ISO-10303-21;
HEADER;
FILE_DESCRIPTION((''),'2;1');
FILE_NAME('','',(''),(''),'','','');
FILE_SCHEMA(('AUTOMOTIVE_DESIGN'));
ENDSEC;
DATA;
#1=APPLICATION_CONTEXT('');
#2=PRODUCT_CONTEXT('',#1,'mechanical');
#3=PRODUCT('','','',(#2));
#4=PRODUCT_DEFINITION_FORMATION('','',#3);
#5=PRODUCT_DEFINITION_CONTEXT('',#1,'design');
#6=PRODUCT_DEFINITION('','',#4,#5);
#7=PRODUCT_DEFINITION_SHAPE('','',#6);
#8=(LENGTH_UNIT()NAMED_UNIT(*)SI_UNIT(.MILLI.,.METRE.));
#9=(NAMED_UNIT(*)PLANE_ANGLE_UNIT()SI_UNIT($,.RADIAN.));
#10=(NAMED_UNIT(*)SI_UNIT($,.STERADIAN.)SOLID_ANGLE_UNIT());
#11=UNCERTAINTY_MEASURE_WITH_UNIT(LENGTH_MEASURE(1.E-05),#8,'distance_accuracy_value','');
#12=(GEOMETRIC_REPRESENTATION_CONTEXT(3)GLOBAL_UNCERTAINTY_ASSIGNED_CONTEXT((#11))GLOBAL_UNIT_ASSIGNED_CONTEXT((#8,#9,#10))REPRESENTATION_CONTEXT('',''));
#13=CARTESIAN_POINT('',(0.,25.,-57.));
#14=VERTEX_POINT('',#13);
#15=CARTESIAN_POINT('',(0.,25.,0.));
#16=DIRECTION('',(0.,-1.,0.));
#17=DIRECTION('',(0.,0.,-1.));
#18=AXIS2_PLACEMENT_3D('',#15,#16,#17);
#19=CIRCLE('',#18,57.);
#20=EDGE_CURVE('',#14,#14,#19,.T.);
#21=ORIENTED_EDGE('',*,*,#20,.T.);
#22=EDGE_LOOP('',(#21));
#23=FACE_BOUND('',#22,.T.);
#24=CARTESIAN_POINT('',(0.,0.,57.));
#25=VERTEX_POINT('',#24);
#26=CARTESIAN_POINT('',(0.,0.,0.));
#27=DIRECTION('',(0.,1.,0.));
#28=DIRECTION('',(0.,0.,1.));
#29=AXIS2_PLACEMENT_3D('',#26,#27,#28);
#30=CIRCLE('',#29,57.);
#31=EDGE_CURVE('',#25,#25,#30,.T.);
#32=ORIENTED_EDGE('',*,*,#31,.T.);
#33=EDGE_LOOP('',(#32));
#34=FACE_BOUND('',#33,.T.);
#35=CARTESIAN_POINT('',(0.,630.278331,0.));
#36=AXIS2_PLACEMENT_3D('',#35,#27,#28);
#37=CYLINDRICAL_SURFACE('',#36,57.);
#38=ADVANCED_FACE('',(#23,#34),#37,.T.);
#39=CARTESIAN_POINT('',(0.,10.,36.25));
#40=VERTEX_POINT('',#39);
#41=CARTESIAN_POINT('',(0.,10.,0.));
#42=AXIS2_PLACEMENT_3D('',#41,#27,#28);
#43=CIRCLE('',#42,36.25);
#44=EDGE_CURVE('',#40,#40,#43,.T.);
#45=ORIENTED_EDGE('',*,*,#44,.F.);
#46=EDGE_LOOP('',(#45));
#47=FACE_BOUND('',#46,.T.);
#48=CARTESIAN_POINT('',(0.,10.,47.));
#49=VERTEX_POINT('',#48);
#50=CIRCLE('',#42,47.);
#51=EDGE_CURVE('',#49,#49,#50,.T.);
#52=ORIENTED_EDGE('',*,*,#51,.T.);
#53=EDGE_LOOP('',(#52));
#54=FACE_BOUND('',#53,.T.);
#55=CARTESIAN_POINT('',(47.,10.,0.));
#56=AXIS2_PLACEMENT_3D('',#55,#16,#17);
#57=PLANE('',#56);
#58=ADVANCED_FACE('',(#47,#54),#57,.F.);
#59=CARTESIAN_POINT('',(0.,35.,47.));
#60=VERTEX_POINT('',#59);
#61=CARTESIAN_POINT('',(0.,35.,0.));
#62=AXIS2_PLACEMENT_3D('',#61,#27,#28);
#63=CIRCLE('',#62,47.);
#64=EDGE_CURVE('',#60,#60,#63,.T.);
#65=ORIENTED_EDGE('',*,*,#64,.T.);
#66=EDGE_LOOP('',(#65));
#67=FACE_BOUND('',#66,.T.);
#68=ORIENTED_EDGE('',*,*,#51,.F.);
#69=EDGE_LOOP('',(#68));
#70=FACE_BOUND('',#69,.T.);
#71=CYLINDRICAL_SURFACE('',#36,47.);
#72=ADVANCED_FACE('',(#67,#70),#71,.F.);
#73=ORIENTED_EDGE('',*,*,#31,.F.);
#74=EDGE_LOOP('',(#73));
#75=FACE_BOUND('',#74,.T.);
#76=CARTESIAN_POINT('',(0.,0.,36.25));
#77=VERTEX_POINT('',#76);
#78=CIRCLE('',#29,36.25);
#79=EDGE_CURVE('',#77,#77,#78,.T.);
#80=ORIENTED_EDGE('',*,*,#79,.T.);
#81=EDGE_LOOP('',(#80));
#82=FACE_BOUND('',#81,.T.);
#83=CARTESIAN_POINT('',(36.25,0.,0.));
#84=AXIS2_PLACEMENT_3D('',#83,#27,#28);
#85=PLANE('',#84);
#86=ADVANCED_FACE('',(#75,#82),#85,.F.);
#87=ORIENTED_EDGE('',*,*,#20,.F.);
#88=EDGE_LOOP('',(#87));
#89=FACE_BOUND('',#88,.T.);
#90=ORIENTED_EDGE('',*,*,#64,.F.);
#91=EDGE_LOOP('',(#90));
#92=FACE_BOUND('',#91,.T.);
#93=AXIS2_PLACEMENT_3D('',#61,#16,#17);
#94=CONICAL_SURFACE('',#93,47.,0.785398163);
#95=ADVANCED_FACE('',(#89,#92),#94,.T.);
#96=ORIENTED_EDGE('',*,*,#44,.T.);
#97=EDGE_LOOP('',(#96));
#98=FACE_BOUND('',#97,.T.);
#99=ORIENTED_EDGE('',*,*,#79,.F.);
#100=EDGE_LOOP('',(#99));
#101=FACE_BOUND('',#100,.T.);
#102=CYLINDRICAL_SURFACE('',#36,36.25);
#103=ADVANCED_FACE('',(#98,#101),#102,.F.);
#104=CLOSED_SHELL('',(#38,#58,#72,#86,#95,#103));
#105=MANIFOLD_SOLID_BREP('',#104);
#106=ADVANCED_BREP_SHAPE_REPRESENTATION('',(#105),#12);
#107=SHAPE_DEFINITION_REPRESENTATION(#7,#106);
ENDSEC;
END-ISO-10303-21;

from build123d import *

# Parameters (mm, degrees)
CHAMFER1_SIZE = 10


with BuildPart() as part:
    # Sketch1 → Revolve1 (revolve)
    with BuildSketch(Plane.XY, mode=Mode.PRIVATE) as revolve1_sk:
        Polygon((36.25, 0), (36.25, 10), (47, 10), (47, 35), (57, 35), (57, 0), align=None)
    revolve(revolve1_sk.sketch.rotate(Axis((0, 630.278330928, 0), (0, -1, 0)), 90), axis=Axis((0, 630.278330928, 0), (0, -1, 0)))

    # Chamfer1
    chamfer1_edges = [part.edges().sort_by_distance(p)[0] for p in [
        (0, 35, -57),
    ]]
    chamfer(chamfer1_edges, length=CHAMFER1_SIZE - 0.0001)  # a hair under: the kernel refuses the full size


solid = part.part
